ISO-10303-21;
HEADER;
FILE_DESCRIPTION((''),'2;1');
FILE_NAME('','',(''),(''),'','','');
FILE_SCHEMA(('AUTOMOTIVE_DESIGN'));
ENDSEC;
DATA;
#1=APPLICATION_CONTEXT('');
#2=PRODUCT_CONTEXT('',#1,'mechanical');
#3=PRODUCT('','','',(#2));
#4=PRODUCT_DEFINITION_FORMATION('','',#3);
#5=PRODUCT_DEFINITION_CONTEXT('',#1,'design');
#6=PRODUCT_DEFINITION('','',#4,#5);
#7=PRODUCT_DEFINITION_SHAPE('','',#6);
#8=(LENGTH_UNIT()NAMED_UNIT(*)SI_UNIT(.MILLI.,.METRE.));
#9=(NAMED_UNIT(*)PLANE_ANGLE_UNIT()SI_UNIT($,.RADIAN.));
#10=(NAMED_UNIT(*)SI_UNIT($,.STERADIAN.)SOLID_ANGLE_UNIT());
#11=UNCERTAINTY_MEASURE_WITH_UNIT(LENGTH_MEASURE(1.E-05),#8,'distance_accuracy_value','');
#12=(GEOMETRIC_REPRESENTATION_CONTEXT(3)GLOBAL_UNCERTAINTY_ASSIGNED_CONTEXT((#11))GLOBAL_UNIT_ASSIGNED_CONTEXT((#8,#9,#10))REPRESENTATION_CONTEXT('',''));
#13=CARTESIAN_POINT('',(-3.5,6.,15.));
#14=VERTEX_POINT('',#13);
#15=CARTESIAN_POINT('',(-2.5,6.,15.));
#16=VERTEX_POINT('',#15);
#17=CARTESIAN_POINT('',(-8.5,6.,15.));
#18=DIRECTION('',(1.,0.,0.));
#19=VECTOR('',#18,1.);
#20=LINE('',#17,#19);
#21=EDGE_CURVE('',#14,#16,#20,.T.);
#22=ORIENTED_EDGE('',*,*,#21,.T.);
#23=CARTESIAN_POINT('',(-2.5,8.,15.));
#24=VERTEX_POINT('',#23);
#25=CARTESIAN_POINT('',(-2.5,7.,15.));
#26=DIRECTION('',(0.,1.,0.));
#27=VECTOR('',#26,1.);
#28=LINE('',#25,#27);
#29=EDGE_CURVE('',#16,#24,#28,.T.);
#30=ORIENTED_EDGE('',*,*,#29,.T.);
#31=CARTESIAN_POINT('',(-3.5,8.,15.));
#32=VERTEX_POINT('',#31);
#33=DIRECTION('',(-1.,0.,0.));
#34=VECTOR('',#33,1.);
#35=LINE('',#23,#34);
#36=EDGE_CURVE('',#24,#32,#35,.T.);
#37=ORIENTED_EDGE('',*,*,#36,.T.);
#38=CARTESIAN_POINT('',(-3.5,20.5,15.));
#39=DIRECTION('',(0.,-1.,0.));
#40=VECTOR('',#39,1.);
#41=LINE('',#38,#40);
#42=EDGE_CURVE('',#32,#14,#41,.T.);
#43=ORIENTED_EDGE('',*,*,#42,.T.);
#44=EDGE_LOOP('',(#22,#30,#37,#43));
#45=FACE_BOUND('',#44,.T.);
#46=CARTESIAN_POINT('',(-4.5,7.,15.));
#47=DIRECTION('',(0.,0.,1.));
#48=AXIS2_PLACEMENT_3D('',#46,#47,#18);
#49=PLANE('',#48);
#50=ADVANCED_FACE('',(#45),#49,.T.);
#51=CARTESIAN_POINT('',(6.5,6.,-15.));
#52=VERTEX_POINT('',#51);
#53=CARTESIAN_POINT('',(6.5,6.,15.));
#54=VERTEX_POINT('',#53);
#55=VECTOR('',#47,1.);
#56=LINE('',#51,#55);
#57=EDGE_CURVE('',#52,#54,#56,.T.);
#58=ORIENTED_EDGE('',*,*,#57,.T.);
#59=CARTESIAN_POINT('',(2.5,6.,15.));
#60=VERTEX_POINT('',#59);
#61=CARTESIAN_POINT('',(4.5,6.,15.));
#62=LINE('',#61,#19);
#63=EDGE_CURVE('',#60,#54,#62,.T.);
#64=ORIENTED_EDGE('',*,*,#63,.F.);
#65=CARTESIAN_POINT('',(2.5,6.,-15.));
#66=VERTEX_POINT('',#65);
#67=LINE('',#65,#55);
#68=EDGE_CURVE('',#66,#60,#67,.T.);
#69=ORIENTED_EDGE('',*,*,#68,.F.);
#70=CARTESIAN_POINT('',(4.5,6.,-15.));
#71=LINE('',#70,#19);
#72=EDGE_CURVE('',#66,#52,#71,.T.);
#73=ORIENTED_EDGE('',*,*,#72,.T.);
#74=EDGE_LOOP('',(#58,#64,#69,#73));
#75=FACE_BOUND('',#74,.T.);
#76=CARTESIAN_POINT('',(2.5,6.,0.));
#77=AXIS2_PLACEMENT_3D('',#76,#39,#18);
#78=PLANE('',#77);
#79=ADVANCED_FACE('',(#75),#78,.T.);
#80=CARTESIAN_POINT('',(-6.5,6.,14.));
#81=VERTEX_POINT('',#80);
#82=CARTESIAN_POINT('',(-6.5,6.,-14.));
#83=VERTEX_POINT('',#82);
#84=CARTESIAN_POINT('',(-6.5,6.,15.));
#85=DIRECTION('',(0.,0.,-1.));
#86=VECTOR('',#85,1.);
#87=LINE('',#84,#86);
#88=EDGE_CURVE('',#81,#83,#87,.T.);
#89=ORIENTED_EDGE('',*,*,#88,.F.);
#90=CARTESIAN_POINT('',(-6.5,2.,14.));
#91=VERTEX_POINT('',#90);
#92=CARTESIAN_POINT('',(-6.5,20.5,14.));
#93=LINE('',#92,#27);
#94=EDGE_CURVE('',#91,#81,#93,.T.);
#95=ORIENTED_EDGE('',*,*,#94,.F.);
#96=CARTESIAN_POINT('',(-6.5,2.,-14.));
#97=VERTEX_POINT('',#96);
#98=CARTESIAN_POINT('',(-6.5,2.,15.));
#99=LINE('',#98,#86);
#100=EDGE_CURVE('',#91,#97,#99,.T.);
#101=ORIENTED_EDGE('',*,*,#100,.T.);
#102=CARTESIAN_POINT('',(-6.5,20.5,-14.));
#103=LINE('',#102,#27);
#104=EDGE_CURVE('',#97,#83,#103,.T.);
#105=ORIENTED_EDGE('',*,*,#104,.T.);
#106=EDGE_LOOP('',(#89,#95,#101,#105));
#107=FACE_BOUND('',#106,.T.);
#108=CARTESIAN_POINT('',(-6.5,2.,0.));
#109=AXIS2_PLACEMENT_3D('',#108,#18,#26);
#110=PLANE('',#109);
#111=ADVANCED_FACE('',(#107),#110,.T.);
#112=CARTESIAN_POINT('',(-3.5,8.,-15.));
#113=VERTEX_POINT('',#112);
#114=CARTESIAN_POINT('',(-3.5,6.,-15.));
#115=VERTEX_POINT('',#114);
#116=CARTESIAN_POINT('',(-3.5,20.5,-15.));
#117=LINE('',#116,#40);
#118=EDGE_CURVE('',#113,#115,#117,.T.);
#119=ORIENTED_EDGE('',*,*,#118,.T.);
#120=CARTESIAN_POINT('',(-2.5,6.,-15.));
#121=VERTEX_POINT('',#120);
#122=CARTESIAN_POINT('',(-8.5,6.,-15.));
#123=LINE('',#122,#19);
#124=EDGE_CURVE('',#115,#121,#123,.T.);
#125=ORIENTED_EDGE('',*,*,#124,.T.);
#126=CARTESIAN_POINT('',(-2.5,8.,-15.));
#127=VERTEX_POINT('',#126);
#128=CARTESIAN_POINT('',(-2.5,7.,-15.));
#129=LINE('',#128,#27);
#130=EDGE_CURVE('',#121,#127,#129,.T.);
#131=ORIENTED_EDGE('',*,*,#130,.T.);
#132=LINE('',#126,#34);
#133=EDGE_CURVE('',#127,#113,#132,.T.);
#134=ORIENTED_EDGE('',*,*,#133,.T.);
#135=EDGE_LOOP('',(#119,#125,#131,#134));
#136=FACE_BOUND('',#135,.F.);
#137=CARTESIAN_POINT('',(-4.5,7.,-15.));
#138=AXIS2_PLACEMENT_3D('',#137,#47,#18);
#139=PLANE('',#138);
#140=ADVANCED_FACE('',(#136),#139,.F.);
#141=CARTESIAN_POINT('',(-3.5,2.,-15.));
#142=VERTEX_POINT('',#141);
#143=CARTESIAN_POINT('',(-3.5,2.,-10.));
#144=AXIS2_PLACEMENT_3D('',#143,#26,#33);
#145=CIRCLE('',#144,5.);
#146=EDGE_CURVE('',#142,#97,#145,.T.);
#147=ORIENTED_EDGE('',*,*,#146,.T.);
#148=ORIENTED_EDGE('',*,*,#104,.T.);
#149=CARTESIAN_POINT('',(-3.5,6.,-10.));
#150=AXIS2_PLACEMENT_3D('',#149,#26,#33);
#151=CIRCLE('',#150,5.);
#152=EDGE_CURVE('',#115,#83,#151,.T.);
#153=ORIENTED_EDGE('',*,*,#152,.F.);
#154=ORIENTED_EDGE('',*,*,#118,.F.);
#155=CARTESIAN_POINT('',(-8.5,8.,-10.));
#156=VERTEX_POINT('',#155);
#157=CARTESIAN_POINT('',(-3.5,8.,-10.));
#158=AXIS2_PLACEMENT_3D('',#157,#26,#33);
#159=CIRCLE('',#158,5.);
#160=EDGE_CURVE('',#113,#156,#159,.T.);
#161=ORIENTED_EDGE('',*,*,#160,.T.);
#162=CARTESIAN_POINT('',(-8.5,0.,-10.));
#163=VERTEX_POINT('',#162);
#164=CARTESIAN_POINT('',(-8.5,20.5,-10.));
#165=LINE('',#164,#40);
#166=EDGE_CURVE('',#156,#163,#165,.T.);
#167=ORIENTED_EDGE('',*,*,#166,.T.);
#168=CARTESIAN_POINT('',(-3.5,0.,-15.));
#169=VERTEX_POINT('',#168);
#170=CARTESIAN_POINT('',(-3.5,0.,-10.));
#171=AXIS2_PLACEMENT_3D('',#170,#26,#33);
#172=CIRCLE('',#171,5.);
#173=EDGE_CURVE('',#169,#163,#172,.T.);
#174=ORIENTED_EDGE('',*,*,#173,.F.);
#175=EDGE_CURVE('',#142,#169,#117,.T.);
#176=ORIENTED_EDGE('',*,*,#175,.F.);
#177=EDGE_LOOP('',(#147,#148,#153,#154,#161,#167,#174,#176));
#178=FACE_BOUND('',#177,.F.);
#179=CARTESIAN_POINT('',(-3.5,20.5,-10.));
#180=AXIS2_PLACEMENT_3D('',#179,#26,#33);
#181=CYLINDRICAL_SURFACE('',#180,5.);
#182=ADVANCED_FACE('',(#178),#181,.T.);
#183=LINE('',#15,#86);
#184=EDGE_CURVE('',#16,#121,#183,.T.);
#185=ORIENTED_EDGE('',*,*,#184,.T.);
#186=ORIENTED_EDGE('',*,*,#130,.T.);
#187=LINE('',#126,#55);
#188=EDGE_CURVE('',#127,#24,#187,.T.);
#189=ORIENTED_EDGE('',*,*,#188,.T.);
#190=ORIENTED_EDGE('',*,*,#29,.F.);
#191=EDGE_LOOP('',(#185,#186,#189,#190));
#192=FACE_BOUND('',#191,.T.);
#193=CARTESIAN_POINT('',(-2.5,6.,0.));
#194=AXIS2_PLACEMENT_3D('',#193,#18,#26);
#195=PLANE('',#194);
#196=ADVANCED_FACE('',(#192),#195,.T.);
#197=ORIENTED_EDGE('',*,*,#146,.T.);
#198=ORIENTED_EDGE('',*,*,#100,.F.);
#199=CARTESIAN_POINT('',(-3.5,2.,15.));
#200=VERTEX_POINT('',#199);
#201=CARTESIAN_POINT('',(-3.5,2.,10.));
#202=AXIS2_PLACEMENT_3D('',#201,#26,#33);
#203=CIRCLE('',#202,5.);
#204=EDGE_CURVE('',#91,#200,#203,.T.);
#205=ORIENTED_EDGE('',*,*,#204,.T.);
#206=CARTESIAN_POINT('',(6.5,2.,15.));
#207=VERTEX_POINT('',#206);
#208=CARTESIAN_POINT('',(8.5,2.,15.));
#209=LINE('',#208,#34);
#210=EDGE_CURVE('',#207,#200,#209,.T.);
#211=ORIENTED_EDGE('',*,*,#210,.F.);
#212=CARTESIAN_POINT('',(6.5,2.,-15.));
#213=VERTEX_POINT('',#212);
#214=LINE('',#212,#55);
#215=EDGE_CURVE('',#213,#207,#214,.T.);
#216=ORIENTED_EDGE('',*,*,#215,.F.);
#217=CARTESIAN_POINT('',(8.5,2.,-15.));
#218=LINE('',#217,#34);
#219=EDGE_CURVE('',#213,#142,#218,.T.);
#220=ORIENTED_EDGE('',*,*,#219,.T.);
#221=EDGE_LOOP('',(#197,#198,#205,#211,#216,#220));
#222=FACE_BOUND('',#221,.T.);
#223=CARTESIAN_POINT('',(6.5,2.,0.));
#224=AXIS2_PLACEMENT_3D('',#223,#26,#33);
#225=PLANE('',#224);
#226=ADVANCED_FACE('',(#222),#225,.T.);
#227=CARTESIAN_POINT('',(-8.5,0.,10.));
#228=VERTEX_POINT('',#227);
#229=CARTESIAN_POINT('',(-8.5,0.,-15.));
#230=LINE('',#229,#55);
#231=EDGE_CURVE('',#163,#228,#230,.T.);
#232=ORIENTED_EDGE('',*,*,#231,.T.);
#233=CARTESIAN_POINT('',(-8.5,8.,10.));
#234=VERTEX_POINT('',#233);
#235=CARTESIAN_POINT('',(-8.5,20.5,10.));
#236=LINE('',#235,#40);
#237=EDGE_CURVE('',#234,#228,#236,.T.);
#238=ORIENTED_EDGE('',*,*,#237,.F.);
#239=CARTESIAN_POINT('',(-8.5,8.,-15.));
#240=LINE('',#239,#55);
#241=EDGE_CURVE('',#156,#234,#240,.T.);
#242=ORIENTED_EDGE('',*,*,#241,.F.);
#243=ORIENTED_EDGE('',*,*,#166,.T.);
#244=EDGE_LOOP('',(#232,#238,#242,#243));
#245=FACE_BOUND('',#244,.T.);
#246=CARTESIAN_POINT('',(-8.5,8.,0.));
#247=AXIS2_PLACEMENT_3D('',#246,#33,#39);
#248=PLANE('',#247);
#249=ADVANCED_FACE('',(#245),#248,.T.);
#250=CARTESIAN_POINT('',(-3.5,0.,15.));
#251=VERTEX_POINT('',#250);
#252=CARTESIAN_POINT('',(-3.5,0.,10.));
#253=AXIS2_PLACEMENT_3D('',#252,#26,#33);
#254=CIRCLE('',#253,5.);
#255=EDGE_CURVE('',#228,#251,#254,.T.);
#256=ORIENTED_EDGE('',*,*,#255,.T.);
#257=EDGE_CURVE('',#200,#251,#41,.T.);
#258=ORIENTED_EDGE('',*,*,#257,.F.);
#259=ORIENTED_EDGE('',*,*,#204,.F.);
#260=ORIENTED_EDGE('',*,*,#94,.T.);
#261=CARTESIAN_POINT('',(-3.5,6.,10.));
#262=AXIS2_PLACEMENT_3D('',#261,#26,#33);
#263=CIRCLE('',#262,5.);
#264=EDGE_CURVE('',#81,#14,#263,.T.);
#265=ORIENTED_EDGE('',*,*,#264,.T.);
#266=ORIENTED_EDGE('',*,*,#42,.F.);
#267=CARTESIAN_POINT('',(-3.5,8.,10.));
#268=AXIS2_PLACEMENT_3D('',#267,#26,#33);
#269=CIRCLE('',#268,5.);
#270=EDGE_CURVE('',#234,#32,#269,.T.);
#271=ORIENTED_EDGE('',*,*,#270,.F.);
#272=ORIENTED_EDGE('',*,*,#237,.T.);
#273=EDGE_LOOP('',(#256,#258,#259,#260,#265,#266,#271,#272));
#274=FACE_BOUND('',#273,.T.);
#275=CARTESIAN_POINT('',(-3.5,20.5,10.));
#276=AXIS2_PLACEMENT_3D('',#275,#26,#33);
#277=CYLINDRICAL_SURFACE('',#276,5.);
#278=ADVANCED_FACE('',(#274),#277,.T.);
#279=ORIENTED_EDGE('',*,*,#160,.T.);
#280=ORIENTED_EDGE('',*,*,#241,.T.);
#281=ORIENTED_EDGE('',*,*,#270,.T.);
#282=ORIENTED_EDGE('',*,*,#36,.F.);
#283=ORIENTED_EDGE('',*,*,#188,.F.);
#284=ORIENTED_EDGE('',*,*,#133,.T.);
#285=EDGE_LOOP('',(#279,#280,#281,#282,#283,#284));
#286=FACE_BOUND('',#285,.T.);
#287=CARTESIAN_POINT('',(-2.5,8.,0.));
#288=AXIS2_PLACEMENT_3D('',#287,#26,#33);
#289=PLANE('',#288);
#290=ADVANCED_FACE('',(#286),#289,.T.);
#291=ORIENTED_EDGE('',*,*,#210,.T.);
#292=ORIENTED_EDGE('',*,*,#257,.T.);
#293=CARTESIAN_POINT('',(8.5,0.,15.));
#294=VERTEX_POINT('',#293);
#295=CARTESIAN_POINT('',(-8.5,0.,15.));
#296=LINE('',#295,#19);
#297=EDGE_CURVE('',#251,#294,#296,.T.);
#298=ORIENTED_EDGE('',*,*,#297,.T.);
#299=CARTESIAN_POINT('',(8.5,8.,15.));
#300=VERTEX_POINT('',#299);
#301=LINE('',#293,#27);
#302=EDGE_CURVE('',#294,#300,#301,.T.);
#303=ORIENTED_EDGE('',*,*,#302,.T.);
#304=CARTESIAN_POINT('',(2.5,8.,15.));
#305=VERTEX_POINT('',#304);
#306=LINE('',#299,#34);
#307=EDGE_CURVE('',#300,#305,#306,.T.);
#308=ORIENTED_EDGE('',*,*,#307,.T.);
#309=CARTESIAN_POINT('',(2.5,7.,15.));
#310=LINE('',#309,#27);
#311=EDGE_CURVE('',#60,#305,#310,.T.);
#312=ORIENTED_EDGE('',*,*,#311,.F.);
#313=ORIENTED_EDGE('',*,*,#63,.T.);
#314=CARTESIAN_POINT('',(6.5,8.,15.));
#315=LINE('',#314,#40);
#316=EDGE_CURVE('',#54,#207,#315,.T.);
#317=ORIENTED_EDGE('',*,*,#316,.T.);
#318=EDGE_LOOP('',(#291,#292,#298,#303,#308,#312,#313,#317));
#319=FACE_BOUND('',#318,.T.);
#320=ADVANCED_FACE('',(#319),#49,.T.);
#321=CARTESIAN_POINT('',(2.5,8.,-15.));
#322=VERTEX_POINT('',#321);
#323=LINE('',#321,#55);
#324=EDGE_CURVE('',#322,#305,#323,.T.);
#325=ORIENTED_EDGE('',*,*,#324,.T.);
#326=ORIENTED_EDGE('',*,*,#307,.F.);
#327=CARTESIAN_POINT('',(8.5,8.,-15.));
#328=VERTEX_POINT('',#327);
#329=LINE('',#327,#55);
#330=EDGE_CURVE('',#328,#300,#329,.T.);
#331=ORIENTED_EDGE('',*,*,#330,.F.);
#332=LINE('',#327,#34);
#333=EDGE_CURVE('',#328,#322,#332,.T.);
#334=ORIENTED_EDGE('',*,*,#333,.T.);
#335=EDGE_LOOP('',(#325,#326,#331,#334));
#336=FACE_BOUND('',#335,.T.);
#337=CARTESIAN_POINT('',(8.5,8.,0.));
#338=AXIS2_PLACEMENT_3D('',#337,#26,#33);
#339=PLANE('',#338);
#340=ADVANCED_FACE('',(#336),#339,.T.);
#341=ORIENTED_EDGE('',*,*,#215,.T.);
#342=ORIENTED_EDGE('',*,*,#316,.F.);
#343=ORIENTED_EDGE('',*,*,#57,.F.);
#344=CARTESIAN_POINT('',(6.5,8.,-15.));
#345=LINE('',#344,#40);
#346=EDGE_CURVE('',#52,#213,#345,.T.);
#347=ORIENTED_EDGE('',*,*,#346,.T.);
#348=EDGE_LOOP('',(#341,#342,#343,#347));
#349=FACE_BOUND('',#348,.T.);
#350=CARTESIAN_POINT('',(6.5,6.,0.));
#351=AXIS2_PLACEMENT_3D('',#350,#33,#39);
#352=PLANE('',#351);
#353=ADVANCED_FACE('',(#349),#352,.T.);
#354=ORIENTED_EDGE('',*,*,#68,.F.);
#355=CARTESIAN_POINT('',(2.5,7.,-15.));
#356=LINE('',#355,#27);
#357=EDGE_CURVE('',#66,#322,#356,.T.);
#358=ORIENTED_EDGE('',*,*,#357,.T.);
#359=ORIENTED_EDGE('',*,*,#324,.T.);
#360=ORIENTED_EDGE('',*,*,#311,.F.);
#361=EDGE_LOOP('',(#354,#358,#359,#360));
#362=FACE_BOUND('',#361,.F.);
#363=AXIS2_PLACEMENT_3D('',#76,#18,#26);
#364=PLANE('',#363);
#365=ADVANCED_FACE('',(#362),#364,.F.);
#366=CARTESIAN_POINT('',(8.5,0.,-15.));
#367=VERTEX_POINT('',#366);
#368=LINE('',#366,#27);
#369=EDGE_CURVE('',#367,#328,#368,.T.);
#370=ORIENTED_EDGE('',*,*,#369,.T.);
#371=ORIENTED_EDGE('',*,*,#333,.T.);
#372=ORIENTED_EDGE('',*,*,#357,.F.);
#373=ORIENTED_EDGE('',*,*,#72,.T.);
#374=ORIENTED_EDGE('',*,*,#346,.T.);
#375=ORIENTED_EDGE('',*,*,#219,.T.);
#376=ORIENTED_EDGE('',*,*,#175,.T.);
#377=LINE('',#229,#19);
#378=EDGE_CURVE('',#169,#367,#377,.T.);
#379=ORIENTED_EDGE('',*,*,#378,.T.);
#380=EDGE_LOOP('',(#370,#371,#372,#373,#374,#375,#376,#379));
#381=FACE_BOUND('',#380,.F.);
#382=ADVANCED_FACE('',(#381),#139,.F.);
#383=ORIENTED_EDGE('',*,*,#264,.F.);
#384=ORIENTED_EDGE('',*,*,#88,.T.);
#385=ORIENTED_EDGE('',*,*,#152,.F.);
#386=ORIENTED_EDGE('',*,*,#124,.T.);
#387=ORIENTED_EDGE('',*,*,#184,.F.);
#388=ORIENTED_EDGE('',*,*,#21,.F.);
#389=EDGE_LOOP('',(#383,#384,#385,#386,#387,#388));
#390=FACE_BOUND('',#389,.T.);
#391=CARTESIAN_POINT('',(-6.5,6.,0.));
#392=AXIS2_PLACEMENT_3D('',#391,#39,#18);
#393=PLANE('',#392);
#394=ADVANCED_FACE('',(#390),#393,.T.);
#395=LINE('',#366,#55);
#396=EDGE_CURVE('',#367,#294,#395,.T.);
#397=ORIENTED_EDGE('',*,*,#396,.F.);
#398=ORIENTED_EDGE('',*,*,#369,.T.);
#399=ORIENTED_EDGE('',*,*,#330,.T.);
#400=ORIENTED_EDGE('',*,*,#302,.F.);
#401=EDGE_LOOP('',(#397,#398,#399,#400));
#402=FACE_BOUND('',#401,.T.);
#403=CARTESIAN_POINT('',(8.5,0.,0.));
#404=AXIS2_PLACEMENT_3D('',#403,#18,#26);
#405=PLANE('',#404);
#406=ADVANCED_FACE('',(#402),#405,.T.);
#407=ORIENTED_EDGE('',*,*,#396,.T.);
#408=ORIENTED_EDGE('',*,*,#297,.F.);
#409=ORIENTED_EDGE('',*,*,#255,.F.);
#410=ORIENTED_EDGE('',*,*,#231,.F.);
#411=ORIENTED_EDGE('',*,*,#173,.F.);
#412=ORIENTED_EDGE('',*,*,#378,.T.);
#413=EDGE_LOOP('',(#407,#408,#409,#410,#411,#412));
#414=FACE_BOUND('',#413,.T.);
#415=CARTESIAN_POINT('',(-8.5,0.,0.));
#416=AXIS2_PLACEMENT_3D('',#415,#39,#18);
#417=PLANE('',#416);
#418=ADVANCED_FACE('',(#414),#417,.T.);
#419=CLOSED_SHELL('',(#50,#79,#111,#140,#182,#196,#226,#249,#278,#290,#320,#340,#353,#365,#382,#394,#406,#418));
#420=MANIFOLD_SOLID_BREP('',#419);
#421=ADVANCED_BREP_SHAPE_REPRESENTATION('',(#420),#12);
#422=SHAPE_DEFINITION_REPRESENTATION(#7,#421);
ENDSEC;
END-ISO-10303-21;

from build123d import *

# Parameters (mm, degrees)
F0_W        = 4
F0_H        = 2
F0_W_2      = 2
F0_H_2      = 4
F0_W_3      = 6.5
F1_DEPTH    = 15
F2_T1_DEPTH = 33


# Not quite as in the source:
# - a fillet or chamfer that OpenCascade refuses, or shapes differently, is made with other operations: its cross-section is extruded or revolved along the edge and cut away or added


with BuildPart() as f1:
    # F0 (on Top) → F1 (new body, symmetric)
    with BuildSketch(Plane.XY):
        with Locations((-4.5, 7)):
            Rectangle(F0_W, F0_H)
        with Locations((-7.5, 7)):
            Rectangle(F0_W_2, F0_H)
        with Locations((-7.5, 4)):
            Rectangle(F0_W_2, F0_H_2)
        with Locations((-7.5, 1)):
            Rectangle(F0_W_2, F0_H)
        with Locations((-3.25, 1)):
            Rectangle(F0_W_3, F0_H)
        with Locations((3.25, 1)):
            Rectangle(F0_W_3, F0_H)
        with Locations((7.5, 1)):
            Rectangle(F0_W_2, F0_H)
        with Locations((7.5, 4)):
            Rectangle(F0_W_2, F0_H_2)
        with Locations((7.5, 7)):
            Rectangle(F0_W_2, F0_H)
        with Locations((4.5, 7)):
            Rectangle(F0_W, F0_H)
    extrude(amount=F1_DEPTH, both=True)

    # F2: fillet of radius 5 on 2 edges, made by hand

    # F2_s2 → F2_t1 (cut)
    with BuildSketch(Plane.XZ.offset(-20.5)):
        with BuildLine():
            ThreePointArc((-8.5, -10), (-7.0355339059, -13.5355339059), (-3.5, -15))
            Line((-3.5, -15), (-8.5, -15))
            Line((-8.5, -15), (-8.5, -10))
        make_face()
        with BuildLine():
            ThreePointArc((-8.5, 10), (-7.0355339059, 13.5355339059), (-3.5, 15))
            Line((-3.5, 15), (-8.5, 15))
            Line((-8.5, 15), (-8.5, 10))
        make_face()
    extrude(amount=F2_T1_DEPTH, mode=Mode.SUBTRACT)


solid = f1.part
